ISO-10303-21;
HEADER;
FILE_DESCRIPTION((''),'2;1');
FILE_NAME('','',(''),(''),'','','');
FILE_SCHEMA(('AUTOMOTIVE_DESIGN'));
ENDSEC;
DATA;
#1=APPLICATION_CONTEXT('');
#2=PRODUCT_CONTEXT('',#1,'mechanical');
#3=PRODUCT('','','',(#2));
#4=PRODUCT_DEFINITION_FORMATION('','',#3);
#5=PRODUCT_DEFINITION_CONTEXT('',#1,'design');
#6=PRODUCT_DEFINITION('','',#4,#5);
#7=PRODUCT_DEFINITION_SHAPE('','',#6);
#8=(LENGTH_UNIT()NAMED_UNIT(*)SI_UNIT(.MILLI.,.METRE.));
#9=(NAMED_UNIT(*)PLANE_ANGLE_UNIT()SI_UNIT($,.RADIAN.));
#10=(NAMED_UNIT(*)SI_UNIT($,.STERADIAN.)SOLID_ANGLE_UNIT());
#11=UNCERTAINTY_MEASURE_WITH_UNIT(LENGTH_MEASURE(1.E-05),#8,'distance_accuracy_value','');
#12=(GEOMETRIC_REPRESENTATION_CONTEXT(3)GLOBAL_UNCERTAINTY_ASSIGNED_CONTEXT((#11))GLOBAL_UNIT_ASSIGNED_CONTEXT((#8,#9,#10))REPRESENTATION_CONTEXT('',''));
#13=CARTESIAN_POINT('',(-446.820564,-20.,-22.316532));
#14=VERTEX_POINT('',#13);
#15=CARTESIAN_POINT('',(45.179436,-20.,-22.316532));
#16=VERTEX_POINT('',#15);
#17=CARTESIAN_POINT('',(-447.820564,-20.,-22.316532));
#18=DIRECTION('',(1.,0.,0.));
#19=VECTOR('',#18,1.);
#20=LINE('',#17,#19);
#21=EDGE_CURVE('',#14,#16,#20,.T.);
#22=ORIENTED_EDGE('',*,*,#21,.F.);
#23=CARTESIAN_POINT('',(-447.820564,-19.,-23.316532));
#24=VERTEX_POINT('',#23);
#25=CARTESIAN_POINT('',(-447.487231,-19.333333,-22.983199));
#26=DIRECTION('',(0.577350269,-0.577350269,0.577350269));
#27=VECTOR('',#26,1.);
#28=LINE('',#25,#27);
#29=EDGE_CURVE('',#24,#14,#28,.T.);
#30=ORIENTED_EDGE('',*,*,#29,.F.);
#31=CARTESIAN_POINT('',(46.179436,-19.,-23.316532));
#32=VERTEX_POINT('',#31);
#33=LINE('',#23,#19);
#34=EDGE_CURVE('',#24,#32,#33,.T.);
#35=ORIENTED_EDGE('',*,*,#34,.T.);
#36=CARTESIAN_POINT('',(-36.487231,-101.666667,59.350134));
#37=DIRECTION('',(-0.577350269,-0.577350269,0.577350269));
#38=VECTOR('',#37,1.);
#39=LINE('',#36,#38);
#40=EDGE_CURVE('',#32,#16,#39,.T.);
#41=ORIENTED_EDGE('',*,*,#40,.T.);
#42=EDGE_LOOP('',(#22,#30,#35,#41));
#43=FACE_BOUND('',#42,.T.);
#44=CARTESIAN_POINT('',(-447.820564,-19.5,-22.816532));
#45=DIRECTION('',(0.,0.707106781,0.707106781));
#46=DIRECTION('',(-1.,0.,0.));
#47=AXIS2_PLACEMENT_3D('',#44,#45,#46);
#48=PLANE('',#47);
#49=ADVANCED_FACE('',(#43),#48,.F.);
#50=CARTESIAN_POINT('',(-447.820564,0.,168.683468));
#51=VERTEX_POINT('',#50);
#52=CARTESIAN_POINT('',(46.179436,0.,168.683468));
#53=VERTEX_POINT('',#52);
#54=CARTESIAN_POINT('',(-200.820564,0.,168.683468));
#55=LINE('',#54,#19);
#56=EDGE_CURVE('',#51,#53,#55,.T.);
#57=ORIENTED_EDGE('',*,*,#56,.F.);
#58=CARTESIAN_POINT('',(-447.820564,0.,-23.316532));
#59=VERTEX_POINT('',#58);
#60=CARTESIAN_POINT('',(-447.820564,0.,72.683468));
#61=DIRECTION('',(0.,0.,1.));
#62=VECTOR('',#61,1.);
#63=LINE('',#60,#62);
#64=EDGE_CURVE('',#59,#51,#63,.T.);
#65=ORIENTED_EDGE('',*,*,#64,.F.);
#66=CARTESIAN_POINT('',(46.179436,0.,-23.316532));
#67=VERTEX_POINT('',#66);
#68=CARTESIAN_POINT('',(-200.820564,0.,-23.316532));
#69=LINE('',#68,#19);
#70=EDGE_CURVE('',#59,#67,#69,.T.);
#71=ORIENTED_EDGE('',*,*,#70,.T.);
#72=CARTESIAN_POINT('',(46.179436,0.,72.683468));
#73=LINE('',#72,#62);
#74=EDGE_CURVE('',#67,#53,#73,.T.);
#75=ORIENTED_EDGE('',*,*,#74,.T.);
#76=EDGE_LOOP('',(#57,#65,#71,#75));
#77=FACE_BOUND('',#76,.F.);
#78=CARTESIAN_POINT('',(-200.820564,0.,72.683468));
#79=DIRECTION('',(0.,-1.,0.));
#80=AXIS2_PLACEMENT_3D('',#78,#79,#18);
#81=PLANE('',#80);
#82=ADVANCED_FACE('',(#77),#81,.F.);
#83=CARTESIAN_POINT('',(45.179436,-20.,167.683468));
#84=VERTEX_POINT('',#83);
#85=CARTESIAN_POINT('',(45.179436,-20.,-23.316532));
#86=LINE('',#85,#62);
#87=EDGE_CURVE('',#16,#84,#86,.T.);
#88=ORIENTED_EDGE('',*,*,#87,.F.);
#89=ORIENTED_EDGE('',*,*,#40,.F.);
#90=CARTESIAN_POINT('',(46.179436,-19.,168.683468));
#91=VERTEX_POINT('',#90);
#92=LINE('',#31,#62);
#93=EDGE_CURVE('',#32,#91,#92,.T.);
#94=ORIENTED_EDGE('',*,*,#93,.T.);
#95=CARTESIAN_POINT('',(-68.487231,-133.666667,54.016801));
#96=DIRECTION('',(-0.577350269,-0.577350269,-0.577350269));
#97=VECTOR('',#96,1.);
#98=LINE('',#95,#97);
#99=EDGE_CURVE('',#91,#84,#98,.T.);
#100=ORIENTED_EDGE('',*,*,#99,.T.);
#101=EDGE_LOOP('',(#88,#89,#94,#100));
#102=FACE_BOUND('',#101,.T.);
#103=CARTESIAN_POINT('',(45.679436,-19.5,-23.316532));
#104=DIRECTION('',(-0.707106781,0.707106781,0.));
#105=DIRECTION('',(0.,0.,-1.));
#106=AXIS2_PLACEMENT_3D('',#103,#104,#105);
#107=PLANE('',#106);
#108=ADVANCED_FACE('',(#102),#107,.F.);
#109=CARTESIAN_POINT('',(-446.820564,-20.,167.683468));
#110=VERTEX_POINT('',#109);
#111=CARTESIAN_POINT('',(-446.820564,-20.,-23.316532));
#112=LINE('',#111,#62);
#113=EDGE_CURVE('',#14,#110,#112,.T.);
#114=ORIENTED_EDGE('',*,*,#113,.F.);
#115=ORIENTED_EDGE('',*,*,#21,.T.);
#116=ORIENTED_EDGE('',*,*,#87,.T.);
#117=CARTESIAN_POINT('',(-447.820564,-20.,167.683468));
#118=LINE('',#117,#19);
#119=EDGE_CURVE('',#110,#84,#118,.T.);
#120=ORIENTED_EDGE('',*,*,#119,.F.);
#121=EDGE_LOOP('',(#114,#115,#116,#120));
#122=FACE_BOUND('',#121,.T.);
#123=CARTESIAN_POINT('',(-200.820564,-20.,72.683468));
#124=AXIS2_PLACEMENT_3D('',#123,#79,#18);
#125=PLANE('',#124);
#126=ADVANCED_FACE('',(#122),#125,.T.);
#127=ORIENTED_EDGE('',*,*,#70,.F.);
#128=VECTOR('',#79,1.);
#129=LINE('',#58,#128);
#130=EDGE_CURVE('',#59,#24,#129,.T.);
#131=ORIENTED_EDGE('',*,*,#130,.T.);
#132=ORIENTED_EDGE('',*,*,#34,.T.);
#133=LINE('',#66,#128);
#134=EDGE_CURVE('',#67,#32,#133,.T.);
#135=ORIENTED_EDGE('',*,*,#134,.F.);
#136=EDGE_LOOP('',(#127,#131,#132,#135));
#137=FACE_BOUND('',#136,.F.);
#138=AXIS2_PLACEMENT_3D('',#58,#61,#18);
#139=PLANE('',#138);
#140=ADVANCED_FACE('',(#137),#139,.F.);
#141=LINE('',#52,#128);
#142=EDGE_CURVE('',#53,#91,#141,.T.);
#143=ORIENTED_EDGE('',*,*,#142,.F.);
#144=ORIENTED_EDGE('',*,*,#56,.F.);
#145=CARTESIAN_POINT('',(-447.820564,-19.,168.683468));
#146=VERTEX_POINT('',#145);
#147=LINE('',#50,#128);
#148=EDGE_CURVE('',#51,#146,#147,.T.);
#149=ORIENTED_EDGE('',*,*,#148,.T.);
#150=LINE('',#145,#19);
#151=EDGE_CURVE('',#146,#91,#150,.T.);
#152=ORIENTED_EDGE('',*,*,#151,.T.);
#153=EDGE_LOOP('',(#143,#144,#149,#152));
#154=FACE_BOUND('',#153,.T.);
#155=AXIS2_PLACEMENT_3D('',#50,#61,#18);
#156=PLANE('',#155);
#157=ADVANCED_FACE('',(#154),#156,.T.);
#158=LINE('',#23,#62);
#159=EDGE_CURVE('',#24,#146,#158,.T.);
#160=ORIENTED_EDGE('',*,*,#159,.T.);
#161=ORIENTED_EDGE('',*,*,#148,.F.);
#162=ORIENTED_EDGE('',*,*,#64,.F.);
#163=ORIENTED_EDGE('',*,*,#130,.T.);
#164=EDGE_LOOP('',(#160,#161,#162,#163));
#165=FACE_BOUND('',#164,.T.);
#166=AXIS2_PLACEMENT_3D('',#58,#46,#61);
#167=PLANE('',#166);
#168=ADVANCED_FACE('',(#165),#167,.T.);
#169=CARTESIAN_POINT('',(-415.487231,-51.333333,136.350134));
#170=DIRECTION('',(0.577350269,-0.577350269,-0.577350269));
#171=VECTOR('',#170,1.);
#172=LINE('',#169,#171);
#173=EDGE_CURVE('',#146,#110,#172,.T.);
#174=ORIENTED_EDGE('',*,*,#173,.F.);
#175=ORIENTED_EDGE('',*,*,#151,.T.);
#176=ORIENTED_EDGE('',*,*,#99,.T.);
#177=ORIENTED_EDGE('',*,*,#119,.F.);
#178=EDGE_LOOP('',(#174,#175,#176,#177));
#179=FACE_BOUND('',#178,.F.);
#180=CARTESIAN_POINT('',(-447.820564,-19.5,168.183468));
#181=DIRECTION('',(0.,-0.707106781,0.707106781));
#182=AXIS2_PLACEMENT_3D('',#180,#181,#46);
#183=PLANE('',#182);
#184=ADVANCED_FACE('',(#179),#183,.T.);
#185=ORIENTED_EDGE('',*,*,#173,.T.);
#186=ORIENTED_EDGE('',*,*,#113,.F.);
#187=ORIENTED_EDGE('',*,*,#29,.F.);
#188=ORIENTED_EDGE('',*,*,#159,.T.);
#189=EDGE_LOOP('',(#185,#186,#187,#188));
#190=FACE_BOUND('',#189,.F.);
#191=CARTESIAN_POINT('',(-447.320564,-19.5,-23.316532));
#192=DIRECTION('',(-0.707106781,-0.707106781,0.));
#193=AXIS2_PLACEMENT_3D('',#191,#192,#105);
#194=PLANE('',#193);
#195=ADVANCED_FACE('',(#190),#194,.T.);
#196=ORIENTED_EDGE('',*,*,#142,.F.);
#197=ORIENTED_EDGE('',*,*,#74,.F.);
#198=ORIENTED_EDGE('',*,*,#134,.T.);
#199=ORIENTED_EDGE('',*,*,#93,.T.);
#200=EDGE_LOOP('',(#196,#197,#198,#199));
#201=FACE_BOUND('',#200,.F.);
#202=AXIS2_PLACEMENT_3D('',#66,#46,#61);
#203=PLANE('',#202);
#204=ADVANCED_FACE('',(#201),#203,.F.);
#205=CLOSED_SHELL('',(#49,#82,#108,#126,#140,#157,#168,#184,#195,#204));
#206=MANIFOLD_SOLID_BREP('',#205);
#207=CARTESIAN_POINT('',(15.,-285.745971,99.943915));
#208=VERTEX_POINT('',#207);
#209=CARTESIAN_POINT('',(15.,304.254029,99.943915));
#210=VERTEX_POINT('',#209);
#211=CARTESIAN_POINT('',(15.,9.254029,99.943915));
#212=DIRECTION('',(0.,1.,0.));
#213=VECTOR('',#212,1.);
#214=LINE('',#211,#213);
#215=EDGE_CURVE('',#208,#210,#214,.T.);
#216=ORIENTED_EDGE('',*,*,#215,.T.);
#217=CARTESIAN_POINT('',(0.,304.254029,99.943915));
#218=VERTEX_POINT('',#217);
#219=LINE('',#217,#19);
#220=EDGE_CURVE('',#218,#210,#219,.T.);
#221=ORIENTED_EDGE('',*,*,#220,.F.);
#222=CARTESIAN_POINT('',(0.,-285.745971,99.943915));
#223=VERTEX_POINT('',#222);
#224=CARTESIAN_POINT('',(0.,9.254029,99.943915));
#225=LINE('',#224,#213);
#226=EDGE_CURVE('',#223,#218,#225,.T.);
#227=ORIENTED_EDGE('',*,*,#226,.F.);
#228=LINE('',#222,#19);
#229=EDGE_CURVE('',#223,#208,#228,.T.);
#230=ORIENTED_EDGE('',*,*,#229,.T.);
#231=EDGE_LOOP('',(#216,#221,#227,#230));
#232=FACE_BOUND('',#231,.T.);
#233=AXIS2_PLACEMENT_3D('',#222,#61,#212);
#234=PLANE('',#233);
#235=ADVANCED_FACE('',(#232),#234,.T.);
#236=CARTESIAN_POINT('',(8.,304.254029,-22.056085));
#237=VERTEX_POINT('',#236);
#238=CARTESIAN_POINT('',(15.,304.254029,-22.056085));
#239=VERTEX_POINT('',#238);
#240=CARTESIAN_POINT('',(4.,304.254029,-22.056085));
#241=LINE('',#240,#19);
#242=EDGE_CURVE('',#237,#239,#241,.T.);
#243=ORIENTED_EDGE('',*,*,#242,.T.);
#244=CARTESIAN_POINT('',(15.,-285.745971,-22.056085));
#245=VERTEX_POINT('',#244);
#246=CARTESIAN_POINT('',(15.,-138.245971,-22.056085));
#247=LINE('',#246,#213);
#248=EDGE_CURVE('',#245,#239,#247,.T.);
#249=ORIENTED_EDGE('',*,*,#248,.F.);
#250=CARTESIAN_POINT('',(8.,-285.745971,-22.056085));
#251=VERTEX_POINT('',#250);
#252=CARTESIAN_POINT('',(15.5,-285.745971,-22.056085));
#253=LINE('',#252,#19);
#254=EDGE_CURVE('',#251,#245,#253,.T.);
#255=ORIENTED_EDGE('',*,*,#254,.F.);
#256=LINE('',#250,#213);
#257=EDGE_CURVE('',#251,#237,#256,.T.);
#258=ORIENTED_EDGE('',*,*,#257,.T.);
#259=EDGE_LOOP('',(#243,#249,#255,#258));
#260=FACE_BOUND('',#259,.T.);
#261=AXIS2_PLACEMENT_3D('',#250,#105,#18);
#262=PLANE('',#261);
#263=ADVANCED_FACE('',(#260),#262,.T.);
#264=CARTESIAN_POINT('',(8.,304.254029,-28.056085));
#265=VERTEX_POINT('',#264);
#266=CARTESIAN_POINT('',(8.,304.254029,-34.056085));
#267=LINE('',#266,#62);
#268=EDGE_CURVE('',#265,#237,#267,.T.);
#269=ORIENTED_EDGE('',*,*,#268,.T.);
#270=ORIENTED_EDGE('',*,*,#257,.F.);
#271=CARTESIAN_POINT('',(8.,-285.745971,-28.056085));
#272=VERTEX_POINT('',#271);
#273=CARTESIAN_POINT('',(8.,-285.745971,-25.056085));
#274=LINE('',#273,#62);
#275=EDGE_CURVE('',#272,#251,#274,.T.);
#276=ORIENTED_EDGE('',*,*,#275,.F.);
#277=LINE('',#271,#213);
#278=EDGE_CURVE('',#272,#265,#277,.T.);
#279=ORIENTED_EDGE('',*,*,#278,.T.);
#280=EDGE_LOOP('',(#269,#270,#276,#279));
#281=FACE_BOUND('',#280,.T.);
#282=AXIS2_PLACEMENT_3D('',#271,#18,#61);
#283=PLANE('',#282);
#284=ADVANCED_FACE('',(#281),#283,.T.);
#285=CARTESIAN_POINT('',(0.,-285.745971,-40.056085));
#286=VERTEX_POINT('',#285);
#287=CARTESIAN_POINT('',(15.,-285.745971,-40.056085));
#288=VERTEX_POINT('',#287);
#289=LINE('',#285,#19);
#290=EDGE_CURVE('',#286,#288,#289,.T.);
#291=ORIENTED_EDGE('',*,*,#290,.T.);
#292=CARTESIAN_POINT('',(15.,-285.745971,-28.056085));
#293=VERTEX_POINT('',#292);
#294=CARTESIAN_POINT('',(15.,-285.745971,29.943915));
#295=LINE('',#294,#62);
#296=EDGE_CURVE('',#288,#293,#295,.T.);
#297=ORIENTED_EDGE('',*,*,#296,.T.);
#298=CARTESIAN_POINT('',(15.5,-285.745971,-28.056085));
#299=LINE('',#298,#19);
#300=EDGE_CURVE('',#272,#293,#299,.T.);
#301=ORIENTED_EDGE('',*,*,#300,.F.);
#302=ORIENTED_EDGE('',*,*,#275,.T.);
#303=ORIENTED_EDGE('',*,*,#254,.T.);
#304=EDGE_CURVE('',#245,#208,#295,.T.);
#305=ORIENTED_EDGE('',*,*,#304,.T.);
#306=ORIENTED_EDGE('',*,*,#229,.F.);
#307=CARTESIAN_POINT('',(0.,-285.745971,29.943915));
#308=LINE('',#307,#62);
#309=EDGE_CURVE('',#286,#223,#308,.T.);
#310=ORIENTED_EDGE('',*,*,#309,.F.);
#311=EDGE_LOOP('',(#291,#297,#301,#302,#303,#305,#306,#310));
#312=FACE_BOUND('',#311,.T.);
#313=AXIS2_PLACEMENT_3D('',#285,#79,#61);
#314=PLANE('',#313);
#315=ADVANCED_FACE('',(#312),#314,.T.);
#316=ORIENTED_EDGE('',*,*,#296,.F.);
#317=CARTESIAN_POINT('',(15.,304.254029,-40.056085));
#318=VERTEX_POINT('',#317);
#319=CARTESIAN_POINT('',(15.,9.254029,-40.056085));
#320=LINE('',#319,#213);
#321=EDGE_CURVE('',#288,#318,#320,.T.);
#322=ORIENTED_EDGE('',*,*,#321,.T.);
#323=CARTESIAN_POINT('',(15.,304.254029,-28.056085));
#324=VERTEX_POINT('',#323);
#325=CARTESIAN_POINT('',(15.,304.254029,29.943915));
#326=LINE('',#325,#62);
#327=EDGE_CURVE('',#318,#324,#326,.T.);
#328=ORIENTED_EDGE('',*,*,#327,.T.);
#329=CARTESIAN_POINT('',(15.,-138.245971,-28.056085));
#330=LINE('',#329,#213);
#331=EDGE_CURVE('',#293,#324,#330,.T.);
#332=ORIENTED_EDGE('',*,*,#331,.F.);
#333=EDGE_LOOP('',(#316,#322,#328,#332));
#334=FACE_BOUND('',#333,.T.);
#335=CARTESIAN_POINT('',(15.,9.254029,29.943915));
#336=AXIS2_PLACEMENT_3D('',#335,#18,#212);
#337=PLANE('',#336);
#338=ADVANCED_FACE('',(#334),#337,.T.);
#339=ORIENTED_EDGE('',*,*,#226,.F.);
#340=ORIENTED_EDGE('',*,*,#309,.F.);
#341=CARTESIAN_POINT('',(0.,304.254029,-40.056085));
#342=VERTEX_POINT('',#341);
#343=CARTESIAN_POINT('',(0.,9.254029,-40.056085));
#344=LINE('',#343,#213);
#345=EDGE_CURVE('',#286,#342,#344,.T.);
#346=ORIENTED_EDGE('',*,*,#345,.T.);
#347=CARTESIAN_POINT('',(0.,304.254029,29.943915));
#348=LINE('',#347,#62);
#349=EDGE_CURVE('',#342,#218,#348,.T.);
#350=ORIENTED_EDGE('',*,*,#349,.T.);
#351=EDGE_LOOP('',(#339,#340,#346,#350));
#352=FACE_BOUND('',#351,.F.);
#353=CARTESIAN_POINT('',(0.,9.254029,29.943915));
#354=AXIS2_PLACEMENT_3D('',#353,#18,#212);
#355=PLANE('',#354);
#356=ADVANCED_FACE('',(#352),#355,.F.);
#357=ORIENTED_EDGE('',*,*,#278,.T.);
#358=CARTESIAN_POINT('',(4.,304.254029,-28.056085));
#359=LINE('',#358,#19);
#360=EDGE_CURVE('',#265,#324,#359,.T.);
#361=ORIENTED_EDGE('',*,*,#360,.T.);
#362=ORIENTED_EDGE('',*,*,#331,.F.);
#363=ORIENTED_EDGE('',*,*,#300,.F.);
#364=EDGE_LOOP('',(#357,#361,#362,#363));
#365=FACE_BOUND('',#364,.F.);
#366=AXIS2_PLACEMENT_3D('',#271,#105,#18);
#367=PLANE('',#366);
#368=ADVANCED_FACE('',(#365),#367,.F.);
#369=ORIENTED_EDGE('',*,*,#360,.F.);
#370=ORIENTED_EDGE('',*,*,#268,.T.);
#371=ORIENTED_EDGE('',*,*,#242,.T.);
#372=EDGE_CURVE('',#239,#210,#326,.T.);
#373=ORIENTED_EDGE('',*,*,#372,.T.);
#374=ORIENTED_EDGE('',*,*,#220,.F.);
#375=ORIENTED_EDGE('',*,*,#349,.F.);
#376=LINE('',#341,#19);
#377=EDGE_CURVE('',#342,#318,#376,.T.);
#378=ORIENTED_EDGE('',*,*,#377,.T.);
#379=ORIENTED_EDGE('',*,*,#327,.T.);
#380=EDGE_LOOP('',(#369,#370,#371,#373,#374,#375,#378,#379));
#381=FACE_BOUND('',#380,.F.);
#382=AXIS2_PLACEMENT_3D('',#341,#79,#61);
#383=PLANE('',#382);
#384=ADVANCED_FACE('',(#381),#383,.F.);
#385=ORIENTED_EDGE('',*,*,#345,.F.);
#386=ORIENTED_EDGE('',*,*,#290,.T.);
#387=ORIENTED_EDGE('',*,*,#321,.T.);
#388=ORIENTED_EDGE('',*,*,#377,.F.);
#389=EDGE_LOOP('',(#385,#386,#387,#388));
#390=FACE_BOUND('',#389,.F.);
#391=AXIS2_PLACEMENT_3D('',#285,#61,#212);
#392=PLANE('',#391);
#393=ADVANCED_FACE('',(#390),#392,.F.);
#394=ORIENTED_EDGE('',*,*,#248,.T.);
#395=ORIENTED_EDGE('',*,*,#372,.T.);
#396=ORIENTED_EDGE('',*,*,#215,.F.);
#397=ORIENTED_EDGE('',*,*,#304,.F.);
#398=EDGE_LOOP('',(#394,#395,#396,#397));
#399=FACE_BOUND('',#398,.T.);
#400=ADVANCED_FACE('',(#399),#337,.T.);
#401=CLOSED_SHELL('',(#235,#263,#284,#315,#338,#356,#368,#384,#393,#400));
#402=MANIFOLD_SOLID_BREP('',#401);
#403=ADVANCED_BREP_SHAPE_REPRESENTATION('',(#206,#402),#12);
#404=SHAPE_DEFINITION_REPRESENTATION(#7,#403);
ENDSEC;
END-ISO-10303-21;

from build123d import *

# Parameters (mm, degrees)
F0_W     = 494
F0_H     = 192
F1_DEPTH = 20
F2_SIZE  = 1
F3_W     = 590
F3_H     = 140
F4_DEPTH = 15
F5_W     = 15
F5_H     = 6
F6_DEPTH = 800


with BuildPart() as f1:
    # F0 (on Front) → F1 (new body)
    with BuildSketch(Plane.XZ):
        with Locations((-200.8205638528, 72.6834676266)):
            Rectangle(F0_W, F0_H)
    extrude(amount=F1_DEPTH)

    # F2
    f2_edges = [f1.edges().sort_by_distance(p)[0] for p in [
        (-200.820564, -20, -23.316532),
        (46.179436, -20, 72.683468),
        (-200.820564, -20, 168.683468),
        (-447.820564, -20, 72.683468),
    ]]
    chamfer(f2_edges, length=F2_SIZE)


with BuildPart() as f4:
    # F3 (on Right) → F4 (new body)
    with BuildSketch(Plane.YZ):
        with Locations((9.2540290207, 29.9439153292)):
            Rectangle(F3_W, F3_H)
    extrude(amount=F4_DEPTH)

    # F5 (on face) → F6 (cut)
    with BuildSketch(Plane.XZ.offset(285.7459709793)):
        with Locations((15.5, -25.0560846708)):
            Rectangle(F5_W, F5_H)
    extrude(amount=-F6_DEPTH, mode=Mode.SUBTRACT)


solid = Compound([f1.part, f4.part])
